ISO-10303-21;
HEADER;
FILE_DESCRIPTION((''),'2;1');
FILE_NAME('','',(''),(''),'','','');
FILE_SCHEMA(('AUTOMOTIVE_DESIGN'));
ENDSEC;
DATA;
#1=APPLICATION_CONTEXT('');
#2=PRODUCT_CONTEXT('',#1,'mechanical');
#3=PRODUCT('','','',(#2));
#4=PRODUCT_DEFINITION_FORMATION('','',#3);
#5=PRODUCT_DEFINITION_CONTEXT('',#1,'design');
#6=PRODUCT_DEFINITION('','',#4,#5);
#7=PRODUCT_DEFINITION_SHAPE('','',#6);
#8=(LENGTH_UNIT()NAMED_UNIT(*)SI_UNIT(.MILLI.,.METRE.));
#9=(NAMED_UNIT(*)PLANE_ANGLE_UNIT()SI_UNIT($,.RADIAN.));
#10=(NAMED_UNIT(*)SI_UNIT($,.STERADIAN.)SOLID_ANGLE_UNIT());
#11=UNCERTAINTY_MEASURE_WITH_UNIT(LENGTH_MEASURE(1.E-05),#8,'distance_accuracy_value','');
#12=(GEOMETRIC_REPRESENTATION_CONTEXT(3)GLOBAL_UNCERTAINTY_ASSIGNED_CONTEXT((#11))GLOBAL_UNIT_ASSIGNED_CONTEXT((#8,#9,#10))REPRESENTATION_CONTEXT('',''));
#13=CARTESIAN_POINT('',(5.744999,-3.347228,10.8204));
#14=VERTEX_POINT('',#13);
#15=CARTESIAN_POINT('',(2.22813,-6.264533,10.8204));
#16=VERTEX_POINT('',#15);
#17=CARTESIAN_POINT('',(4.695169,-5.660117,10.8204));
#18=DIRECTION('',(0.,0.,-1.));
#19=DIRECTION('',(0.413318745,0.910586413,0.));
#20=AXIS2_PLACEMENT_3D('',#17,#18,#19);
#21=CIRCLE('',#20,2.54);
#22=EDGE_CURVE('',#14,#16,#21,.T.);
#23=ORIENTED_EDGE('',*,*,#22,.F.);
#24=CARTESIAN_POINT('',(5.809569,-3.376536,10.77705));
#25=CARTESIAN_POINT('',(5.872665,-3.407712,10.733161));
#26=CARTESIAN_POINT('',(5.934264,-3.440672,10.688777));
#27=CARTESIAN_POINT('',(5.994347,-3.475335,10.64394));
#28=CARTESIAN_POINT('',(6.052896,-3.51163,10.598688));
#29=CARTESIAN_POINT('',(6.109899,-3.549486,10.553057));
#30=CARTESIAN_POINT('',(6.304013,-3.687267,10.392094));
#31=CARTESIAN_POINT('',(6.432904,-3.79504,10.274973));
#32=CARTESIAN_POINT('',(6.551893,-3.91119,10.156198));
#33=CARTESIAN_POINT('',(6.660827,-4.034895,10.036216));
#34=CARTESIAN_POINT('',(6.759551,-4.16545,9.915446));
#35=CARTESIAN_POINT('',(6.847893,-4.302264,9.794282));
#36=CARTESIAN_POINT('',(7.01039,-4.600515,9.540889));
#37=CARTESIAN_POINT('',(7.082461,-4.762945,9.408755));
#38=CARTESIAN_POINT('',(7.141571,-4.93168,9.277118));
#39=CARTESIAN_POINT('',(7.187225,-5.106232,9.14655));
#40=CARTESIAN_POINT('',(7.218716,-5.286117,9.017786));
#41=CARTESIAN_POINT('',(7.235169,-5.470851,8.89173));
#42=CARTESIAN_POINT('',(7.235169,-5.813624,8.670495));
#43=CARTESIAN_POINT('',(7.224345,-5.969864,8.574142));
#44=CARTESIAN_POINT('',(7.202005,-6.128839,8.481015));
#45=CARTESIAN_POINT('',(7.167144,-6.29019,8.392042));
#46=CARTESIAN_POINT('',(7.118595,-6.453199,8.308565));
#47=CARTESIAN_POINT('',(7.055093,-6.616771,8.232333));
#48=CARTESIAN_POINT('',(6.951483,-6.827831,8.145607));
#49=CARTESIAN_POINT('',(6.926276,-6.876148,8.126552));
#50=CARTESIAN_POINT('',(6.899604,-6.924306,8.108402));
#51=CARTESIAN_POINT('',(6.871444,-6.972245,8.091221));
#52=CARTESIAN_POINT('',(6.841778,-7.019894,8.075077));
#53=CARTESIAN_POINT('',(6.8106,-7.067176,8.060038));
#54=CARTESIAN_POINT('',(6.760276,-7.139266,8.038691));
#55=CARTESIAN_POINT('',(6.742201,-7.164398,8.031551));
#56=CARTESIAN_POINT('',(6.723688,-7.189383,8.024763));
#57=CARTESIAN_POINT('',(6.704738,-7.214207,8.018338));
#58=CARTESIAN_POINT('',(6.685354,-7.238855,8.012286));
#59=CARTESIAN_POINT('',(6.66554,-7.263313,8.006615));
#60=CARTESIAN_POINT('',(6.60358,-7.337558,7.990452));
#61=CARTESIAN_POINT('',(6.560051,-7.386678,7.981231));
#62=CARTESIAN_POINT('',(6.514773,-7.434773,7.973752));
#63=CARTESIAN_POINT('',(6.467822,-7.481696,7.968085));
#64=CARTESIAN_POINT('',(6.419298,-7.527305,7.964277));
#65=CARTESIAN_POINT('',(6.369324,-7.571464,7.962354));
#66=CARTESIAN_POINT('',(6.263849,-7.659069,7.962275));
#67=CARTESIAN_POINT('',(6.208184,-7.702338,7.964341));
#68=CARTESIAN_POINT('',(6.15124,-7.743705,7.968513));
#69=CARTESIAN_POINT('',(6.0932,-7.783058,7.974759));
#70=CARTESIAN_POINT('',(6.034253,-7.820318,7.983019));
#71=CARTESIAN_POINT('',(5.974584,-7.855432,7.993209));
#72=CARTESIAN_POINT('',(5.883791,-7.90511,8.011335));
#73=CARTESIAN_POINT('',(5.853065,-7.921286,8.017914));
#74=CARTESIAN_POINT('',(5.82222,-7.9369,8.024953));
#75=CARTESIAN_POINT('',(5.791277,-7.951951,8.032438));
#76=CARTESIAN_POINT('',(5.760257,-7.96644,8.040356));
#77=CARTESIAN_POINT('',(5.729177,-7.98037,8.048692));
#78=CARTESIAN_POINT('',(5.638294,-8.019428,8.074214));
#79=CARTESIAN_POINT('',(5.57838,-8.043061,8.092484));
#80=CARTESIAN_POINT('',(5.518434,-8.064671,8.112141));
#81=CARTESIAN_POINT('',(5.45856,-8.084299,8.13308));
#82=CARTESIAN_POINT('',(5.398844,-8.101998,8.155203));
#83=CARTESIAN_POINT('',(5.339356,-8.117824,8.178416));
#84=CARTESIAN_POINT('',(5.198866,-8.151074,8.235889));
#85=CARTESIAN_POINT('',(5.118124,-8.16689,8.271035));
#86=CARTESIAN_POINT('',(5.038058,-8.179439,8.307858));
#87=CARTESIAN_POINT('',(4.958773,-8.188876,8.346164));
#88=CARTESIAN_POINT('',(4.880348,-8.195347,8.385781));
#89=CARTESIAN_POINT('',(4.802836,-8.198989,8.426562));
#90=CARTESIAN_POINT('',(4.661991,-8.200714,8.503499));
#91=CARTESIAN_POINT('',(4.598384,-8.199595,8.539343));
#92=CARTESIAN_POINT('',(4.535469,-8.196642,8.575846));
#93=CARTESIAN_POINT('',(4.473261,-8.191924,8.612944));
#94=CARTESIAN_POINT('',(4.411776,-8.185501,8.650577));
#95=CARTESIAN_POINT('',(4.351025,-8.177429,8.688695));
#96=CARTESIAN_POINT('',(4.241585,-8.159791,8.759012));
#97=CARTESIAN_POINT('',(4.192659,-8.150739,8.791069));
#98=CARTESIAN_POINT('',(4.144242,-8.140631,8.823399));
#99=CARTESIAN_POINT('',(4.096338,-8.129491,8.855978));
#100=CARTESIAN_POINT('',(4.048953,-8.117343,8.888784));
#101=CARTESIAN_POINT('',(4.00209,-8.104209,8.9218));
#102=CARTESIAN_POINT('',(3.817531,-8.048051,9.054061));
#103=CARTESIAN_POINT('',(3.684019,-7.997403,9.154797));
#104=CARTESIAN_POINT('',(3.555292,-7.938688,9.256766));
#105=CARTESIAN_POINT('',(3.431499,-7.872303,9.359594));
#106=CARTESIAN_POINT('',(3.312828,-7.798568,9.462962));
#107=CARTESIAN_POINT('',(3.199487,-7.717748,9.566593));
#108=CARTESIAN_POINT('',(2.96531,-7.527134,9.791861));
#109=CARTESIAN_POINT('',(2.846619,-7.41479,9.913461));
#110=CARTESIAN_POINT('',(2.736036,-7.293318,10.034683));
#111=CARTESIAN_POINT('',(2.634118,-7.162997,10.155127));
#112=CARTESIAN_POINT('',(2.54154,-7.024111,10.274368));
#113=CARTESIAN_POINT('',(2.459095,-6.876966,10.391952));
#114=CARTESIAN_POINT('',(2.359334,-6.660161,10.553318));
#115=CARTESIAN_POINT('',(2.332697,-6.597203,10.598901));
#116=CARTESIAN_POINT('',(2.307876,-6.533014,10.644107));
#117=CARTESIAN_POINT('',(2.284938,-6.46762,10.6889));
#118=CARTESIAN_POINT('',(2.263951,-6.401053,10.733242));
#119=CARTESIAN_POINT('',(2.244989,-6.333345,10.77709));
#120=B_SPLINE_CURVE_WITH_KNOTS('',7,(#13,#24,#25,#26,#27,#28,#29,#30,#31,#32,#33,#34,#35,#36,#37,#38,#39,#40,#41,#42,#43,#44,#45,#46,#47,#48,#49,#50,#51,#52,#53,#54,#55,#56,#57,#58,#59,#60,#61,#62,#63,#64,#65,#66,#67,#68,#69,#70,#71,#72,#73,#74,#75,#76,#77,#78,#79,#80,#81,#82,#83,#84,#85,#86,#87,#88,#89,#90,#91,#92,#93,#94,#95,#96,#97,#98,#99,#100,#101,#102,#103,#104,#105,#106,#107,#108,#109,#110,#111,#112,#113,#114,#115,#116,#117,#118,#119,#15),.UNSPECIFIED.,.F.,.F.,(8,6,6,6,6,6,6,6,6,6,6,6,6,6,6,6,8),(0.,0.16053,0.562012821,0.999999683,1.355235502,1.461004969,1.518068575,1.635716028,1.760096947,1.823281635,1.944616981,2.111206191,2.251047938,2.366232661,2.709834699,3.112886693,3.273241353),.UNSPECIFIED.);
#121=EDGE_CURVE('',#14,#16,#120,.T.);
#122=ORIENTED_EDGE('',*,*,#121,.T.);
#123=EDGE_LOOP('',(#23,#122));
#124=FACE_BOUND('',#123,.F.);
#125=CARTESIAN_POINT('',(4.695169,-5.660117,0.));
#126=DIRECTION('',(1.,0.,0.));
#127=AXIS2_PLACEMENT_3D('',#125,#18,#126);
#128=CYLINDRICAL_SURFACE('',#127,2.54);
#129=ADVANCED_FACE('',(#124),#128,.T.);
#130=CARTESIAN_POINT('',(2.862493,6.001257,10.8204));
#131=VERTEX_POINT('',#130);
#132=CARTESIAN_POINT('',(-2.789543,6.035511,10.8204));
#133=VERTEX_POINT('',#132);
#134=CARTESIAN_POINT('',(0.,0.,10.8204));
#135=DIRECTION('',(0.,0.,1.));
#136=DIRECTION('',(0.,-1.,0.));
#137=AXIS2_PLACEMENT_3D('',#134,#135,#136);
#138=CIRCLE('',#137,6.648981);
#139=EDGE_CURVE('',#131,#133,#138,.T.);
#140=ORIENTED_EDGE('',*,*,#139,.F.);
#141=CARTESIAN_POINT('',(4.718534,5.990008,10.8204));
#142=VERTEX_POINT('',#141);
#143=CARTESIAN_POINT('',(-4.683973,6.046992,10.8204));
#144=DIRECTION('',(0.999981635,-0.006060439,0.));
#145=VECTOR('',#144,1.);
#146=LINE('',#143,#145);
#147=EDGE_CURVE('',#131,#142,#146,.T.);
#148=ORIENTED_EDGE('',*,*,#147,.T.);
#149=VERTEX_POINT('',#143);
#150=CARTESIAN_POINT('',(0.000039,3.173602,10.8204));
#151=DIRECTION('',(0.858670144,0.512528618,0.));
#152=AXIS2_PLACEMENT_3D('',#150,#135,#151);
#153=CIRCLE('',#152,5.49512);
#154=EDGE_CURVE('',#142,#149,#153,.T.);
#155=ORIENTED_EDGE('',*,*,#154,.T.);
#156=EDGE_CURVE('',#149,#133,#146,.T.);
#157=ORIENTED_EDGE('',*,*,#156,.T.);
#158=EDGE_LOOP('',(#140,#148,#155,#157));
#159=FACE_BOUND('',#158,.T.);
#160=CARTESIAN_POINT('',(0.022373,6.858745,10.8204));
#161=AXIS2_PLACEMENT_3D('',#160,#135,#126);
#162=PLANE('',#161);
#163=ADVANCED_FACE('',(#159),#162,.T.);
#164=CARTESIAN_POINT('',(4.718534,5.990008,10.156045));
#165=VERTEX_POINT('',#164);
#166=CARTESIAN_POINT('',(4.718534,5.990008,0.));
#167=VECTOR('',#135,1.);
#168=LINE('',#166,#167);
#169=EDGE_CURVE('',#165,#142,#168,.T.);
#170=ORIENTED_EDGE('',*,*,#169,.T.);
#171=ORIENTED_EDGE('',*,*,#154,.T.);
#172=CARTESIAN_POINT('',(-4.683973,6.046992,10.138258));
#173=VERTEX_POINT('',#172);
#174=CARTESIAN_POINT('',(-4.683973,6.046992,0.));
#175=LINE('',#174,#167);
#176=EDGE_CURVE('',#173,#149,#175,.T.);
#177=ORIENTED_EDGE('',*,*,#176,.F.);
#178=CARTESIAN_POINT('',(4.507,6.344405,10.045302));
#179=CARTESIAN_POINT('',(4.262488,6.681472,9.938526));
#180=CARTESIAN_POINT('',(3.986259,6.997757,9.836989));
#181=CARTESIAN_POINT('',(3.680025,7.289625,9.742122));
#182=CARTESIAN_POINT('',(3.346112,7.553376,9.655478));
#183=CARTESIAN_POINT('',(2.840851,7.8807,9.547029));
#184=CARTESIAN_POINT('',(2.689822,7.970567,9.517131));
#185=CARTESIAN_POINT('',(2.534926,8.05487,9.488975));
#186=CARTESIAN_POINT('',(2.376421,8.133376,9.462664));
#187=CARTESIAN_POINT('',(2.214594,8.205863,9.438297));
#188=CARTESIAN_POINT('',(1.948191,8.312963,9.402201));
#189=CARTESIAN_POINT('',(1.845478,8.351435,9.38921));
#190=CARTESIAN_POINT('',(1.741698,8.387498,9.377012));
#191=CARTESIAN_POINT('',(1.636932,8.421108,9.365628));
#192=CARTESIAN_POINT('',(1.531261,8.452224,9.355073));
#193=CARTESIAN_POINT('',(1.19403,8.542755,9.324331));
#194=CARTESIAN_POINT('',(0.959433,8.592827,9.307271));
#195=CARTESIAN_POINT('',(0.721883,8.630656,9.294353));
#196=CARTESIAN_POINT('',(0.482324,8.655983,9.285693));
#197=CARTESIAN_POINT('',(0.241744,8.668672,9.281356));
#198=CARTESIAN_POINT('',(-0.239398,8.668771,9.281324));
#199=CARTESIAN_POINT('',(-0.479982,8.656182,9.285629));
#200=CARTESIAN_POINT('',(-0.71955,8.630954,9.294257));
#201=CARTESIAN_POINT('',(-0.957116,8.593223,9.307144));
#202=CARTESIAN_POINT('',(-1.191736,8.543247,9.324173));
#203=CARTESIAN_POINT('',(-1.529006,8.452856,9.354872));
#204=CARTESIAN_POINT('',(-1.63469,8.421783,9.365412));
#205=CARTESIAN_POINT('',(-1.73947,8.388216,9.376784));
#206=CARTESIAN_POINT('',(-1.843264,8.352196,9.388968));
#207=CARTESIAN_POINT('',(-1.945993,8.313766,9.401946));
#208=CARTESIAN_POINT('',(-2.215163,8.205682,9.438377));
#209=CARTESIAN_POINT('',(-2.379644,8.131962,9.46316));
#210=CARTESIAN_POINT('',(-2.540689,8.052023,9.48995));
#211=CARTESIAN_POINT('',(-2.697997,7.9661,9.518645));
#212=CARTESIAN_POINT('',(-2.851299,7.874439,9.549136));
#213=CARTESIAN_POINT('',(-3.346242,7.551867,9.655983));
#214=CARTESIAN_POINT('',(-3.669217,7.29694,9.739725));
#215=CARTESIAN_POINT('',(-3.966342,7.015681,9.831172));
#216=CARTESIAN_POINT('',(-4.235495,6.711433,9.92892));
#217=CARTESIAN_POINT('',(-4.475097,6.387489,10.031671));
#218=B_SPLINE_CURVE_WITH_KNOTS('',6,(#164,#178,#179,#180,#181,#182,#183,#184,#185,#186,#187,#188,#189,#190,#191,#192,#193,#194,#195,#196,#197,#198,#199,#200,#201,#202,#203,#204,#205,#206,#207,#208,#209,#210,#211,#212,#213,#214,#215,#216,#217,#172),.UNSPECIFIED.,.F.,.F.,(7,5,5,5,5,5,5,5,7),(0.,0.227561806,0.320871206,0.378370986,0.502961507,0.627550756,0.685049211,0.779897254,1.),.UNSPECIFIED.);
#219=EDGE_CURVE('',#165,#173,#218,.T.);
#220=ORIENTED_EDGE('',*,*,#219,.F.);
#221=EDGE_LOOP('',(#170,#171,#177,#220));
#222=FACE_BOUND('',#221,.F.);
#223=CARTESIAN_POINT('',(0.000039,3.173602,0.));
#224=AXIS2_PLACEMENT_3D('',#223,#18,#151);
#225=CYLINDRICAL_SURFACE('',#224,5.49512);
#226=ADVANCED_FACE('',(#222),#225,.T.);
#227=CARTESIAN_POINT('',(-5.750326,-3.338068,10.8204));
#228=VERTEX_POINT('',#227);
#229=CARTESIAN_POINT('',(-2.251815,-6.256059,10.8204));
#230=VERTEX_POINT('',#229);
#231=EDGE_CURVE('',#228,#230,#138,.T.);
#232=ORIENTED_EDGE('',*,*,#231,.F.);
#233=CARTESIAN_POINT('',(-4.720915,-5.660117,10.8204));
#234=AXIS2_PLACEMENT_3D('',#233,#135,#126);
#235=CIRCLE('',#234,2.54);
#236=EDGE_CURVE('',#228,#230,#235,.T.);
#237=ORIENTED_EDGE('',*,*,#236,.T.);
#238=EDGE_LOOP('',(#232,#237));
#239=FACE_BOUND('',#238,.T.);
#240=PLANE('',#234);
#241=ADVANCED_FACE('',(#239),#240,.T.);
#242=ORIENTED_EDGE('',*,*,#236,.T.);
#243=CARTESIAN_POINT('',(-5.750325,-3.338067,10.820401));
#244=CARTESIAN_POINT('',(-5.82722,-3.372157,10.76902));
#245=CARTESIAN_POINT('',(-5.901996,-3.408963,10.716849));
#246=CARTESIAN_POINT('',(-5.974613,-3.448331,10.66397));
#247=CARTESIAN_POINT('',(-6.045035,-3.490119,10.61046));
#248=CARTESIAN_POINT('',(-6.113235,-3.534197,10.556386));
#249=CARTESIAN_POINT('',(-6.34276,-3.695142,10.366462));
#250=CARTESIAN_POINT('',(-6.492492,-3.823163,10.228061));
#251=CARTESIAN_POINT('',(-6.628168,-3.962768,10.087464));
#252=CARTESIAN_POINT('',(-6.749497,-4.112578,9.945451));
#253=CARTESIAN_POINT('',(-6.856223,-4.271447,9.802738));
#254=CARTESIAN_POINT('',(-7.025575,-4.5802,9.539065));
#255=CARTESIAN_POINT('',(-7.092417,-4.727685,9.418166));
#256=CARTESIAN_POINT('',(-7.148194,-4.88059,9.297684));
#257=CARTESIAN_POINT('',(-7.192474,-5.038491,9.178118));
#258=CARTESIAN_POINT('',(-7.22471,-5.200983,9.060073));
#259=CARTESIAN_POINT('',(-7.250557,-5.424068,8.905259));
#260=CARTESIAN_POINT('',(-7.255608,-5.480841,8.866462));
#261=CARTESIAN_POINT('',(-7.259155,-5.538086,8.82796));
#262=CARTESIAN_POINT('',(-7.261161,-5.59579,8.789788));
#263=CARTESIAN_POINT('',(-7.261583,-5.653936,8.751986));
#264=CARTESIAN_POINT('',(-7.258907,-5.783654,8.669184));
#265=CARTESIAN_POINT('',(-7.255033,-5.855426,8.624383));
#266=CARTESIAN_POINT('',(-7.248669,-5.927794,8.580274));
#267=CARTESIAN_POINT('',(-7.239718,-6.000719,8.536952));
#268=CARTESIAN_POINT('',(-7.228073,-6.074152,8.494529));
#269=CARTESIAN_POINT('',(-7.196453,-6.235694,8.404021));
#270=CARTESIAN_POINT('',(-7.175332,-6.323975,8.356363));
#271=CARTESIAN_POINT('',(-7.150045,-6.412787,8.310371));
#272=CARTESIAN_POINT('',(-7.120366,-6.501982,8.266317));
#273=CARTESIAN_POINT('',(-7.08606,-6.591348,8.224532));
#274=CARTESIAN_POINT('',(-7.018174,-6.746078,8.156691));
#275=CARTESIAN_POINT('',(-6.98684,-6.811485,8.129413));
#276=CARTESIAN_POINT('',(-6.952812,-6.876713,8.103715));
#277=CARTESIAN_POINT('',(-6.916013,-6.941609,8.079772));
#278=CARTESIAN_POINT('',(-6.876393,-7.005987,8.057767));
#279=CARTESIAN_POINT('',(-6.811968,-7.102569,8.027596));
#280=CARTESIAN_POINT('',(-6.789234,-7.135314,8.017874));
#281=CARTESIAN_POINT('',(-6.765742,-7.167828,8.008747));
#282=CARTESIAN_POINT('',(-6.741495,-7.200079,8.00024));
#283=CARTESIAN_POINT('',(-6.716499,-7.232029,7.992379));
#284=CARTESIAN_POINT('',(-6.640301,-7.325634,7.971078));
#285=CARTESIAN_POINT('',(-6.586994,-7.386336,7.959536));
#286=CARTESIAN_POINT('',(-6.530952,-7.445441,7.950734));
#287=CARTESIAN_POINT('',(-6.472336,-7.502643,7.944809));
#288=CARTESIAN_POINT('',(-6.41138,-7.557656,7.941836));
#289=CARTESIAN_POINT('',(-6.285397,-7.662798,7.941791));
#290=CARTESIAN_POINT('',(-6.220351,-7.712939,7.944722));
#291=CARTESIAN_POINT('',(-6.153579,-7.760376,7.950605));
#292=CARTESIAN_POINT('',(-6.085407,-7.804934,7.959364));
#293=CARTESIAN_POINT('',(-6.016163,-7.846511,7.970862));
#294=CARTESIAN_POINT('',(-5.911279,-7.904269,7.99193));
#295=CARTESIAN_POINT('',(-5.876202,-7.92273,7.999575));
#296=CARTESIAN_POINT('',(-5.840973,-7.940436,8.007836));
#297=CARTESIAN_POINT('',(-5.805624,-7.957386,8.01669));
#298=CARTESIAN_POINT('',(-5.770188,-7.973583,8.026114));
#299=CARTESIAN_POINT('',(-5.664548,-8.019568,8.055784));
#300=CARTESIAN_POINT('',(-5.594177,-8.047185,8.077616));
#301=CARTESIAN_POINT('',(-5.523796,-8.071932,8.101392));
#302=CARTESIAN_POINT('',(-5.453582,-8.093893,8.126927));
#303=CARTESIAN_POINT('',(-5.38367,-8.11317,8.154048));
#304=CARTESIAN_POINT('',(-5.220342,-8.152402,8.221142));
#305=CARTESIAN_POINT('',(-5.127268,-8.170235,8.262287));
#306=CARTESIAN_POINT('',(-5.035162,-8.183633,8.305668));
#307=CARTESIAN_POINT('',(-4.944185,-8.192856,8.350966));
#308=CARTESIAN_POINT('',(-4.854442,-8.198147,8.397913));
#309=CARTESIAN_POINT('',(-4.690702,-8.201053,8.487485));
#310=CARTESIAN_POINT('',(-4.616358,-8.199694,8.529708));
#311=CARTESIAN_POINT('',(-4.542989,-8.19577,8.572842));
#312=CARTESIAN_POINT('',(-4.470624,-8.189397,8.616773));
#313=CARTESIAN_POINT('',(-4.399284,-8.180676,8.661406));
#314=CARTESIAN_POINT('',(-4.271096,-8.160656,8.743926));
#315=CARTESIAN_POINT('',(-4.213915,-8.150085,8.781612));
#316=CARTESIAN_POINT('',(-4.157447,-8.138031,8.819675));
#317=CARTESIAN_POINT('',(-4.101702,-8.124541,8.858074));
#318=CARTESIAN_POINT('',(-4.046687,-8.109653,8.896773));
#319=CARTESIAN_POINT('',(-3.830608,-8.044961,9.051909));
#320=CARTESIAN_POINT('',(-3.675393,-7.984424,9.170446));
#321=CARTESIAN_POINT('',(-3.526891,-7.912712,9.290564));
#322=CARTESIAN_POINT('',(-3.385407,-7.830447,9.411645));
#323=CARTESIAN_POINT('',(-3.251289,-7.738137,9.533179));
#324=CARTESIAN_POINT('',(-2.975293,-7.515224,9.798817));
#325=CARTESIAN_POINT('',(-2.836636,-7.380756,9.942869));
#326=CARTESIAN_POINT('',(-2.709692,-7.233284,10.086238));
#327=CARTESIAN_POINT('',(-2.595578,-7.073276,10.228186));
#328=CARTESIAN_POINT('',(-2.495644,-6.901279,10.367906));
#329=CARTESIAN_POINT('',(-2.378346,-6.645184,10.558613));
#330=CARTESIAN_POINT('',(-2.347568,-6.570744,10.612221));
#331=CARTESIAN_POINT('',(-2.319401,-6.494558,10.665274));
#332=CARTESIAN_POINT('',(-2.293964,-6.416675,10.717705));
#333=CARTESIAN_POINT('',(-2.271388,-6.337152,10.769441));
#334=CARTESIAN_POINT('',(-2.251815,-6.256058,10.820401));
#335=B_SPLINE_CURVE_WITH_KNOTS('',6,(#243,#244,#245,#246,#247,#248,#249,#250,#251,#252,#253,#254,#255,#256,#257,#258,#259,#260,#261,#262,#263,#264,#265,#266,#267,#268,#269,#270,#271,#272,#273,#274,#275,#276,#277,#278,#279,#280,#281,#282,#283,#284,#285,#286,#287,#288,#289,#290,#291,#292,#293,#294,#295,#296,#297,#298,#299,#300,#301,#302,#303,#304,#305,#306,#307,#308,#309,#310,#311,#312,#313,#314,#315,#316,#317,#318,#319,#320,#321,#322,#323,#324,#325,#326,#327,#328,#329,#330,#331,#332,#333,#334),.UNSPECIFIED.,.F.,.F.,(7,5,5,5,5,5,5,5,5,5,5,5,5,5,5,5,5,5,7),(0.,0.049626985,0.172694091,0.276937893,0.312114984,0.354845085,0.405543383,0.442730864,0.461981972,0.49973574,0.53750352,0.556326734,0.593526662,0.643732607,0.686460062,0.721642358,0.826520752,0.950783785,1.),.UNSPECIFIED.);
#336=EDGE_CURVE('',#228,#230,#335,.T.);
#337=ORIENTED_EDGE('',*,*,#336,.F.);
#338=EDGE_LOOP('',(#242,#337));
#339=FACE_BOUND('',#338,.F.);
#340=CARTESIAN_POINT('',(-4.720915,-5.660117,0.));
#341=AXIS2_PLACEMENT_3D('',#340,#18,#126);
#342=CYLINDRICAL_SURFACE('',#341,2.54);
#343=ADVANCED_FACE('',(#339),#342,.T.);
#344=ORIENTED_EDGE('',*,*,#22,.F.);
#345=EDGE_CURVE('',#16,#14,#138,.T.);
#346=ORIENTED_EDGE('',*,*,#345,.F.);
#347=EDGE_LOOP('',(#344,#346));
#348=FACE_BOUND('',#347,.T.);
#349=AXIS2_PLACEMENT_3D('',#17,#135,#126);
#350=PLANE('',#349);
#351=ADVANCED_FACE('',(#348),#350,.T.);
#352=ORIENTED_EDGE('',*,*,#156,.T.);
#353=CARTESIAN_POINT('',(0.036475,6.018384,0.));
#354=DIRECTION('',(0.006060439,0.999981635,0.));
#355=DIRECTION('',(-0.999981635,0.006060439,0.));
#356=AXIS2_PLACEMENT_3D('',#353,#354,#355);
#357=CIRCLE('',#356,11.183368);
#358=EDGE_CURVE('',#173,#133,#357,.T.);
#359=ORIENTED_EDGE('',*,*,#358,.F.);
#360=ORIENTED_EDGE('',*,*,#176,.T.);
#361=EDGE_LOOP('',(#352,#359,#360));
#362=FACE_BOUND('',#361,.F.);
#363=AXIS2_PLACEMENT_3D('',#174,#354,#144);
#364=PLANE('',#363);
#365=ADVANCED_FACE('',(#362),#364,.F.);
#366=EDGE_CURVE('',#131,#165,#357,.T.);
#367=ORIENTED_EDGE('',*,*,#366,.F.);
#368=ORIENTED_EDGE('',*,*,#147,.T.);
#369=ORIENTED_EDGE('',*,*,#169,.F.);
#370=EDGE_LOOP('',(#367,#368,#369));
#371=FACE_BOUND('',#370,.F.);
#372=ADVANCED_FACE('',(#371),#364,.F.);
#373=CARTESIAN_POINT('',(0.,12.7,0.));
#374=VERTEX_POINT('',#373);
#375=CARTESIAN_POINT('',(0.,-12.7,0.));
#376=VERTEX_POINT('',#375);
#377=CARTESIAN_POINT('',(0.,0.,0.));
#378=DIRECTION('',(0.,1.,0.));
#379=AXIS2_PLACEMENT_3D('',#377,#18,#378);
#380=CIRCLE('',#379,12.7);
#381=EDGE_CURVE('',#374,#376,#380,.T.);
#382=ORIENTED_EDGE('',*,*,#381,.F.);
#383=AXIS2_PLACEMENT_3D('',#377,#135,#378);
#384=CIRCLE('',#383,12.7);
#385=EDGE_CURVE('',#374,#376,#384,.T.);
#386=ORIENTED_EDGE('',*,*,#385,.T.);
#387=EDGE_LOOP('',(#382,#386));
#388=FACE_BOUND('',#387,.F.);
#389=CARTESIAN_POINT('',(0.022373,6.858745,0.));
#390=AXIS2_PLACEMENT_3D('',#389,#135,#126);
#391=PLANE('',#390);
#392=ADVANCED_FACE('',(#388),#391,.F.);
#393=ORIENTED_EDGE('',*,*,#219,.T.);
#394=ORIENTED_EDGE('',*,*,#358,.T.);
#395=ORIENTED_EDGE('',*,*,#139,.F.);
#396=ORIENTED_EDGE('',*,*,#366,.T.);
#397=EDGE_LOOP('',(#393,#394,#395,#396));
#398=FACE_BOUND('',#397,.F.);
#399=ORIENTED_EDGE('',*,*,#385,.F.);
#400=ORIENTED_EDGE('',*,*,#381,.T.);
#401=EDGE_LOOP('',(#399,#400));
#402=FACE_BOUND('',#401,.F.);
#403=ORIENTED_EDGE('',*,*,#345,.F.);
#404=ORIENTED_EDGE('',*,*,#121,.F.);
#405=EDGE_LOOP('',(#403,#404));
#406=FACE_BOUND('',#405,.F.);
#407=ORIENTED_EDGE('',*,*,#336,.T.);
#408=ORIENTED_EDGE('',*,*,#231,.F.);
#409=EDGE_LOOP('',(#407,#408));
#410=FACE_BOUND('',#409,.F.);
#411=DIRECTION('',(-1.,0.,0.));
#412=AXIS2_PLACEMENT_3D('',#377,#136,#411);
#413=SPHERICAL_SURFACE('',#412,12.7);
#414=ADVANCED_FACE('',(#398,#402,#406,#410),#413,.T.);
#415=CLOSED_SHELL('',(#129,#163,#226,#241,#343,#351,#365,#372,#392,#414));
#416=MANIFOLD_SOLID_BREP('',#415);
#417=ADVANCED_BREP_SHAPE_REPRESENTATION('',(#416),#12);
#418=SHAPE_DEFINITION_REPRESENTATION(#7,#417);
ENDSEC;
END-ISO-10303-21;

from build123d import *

# Parameters (mm, degrees)
F1_ANGLE = 180
F2_R     = 2.54
F4_DEPTH = 10.8204


with BuildPart() as f1:
    # F0 (on Top) → F1 (revolve)
    with BuildSketch(Plane.XY):
        with BuildLine():
            Line((0, 0), (0, 12.7))
            ThreePointArc((0, 12.7), (-12.7, 0), (0, -12.7))
            Line((0, -12.7), (0, 0))
        make_face()
    revolve(axis=Axis((0, 0, 0), (0, 1, 0)), revolution_arc=F1_ANGLE)

    # F3 (on Top) + F2 (on Top) → F4 (join)
    with BuildSketch(Plane.XY):
        with BuildLine():
            Line((-4.6839732677, 6.046992261), (4.7185341828, 5.9900078923))
            ThreePointArc((4.7185341828, 5.9900078923), (0.0333416464, 8.6686206572), (-4.6839732677, 6.046992261))
        make_face()
    with BuildSketch(Plane.XY):
        with Locations((4.695169162, -5.6601171382)):
            Circle(F2_R)
        with Locations((-4.7209146433, -5.6601171382)):
            Circle(F2_R)
    extrude(amount=F4_DEPTH)


solid = f1.part
